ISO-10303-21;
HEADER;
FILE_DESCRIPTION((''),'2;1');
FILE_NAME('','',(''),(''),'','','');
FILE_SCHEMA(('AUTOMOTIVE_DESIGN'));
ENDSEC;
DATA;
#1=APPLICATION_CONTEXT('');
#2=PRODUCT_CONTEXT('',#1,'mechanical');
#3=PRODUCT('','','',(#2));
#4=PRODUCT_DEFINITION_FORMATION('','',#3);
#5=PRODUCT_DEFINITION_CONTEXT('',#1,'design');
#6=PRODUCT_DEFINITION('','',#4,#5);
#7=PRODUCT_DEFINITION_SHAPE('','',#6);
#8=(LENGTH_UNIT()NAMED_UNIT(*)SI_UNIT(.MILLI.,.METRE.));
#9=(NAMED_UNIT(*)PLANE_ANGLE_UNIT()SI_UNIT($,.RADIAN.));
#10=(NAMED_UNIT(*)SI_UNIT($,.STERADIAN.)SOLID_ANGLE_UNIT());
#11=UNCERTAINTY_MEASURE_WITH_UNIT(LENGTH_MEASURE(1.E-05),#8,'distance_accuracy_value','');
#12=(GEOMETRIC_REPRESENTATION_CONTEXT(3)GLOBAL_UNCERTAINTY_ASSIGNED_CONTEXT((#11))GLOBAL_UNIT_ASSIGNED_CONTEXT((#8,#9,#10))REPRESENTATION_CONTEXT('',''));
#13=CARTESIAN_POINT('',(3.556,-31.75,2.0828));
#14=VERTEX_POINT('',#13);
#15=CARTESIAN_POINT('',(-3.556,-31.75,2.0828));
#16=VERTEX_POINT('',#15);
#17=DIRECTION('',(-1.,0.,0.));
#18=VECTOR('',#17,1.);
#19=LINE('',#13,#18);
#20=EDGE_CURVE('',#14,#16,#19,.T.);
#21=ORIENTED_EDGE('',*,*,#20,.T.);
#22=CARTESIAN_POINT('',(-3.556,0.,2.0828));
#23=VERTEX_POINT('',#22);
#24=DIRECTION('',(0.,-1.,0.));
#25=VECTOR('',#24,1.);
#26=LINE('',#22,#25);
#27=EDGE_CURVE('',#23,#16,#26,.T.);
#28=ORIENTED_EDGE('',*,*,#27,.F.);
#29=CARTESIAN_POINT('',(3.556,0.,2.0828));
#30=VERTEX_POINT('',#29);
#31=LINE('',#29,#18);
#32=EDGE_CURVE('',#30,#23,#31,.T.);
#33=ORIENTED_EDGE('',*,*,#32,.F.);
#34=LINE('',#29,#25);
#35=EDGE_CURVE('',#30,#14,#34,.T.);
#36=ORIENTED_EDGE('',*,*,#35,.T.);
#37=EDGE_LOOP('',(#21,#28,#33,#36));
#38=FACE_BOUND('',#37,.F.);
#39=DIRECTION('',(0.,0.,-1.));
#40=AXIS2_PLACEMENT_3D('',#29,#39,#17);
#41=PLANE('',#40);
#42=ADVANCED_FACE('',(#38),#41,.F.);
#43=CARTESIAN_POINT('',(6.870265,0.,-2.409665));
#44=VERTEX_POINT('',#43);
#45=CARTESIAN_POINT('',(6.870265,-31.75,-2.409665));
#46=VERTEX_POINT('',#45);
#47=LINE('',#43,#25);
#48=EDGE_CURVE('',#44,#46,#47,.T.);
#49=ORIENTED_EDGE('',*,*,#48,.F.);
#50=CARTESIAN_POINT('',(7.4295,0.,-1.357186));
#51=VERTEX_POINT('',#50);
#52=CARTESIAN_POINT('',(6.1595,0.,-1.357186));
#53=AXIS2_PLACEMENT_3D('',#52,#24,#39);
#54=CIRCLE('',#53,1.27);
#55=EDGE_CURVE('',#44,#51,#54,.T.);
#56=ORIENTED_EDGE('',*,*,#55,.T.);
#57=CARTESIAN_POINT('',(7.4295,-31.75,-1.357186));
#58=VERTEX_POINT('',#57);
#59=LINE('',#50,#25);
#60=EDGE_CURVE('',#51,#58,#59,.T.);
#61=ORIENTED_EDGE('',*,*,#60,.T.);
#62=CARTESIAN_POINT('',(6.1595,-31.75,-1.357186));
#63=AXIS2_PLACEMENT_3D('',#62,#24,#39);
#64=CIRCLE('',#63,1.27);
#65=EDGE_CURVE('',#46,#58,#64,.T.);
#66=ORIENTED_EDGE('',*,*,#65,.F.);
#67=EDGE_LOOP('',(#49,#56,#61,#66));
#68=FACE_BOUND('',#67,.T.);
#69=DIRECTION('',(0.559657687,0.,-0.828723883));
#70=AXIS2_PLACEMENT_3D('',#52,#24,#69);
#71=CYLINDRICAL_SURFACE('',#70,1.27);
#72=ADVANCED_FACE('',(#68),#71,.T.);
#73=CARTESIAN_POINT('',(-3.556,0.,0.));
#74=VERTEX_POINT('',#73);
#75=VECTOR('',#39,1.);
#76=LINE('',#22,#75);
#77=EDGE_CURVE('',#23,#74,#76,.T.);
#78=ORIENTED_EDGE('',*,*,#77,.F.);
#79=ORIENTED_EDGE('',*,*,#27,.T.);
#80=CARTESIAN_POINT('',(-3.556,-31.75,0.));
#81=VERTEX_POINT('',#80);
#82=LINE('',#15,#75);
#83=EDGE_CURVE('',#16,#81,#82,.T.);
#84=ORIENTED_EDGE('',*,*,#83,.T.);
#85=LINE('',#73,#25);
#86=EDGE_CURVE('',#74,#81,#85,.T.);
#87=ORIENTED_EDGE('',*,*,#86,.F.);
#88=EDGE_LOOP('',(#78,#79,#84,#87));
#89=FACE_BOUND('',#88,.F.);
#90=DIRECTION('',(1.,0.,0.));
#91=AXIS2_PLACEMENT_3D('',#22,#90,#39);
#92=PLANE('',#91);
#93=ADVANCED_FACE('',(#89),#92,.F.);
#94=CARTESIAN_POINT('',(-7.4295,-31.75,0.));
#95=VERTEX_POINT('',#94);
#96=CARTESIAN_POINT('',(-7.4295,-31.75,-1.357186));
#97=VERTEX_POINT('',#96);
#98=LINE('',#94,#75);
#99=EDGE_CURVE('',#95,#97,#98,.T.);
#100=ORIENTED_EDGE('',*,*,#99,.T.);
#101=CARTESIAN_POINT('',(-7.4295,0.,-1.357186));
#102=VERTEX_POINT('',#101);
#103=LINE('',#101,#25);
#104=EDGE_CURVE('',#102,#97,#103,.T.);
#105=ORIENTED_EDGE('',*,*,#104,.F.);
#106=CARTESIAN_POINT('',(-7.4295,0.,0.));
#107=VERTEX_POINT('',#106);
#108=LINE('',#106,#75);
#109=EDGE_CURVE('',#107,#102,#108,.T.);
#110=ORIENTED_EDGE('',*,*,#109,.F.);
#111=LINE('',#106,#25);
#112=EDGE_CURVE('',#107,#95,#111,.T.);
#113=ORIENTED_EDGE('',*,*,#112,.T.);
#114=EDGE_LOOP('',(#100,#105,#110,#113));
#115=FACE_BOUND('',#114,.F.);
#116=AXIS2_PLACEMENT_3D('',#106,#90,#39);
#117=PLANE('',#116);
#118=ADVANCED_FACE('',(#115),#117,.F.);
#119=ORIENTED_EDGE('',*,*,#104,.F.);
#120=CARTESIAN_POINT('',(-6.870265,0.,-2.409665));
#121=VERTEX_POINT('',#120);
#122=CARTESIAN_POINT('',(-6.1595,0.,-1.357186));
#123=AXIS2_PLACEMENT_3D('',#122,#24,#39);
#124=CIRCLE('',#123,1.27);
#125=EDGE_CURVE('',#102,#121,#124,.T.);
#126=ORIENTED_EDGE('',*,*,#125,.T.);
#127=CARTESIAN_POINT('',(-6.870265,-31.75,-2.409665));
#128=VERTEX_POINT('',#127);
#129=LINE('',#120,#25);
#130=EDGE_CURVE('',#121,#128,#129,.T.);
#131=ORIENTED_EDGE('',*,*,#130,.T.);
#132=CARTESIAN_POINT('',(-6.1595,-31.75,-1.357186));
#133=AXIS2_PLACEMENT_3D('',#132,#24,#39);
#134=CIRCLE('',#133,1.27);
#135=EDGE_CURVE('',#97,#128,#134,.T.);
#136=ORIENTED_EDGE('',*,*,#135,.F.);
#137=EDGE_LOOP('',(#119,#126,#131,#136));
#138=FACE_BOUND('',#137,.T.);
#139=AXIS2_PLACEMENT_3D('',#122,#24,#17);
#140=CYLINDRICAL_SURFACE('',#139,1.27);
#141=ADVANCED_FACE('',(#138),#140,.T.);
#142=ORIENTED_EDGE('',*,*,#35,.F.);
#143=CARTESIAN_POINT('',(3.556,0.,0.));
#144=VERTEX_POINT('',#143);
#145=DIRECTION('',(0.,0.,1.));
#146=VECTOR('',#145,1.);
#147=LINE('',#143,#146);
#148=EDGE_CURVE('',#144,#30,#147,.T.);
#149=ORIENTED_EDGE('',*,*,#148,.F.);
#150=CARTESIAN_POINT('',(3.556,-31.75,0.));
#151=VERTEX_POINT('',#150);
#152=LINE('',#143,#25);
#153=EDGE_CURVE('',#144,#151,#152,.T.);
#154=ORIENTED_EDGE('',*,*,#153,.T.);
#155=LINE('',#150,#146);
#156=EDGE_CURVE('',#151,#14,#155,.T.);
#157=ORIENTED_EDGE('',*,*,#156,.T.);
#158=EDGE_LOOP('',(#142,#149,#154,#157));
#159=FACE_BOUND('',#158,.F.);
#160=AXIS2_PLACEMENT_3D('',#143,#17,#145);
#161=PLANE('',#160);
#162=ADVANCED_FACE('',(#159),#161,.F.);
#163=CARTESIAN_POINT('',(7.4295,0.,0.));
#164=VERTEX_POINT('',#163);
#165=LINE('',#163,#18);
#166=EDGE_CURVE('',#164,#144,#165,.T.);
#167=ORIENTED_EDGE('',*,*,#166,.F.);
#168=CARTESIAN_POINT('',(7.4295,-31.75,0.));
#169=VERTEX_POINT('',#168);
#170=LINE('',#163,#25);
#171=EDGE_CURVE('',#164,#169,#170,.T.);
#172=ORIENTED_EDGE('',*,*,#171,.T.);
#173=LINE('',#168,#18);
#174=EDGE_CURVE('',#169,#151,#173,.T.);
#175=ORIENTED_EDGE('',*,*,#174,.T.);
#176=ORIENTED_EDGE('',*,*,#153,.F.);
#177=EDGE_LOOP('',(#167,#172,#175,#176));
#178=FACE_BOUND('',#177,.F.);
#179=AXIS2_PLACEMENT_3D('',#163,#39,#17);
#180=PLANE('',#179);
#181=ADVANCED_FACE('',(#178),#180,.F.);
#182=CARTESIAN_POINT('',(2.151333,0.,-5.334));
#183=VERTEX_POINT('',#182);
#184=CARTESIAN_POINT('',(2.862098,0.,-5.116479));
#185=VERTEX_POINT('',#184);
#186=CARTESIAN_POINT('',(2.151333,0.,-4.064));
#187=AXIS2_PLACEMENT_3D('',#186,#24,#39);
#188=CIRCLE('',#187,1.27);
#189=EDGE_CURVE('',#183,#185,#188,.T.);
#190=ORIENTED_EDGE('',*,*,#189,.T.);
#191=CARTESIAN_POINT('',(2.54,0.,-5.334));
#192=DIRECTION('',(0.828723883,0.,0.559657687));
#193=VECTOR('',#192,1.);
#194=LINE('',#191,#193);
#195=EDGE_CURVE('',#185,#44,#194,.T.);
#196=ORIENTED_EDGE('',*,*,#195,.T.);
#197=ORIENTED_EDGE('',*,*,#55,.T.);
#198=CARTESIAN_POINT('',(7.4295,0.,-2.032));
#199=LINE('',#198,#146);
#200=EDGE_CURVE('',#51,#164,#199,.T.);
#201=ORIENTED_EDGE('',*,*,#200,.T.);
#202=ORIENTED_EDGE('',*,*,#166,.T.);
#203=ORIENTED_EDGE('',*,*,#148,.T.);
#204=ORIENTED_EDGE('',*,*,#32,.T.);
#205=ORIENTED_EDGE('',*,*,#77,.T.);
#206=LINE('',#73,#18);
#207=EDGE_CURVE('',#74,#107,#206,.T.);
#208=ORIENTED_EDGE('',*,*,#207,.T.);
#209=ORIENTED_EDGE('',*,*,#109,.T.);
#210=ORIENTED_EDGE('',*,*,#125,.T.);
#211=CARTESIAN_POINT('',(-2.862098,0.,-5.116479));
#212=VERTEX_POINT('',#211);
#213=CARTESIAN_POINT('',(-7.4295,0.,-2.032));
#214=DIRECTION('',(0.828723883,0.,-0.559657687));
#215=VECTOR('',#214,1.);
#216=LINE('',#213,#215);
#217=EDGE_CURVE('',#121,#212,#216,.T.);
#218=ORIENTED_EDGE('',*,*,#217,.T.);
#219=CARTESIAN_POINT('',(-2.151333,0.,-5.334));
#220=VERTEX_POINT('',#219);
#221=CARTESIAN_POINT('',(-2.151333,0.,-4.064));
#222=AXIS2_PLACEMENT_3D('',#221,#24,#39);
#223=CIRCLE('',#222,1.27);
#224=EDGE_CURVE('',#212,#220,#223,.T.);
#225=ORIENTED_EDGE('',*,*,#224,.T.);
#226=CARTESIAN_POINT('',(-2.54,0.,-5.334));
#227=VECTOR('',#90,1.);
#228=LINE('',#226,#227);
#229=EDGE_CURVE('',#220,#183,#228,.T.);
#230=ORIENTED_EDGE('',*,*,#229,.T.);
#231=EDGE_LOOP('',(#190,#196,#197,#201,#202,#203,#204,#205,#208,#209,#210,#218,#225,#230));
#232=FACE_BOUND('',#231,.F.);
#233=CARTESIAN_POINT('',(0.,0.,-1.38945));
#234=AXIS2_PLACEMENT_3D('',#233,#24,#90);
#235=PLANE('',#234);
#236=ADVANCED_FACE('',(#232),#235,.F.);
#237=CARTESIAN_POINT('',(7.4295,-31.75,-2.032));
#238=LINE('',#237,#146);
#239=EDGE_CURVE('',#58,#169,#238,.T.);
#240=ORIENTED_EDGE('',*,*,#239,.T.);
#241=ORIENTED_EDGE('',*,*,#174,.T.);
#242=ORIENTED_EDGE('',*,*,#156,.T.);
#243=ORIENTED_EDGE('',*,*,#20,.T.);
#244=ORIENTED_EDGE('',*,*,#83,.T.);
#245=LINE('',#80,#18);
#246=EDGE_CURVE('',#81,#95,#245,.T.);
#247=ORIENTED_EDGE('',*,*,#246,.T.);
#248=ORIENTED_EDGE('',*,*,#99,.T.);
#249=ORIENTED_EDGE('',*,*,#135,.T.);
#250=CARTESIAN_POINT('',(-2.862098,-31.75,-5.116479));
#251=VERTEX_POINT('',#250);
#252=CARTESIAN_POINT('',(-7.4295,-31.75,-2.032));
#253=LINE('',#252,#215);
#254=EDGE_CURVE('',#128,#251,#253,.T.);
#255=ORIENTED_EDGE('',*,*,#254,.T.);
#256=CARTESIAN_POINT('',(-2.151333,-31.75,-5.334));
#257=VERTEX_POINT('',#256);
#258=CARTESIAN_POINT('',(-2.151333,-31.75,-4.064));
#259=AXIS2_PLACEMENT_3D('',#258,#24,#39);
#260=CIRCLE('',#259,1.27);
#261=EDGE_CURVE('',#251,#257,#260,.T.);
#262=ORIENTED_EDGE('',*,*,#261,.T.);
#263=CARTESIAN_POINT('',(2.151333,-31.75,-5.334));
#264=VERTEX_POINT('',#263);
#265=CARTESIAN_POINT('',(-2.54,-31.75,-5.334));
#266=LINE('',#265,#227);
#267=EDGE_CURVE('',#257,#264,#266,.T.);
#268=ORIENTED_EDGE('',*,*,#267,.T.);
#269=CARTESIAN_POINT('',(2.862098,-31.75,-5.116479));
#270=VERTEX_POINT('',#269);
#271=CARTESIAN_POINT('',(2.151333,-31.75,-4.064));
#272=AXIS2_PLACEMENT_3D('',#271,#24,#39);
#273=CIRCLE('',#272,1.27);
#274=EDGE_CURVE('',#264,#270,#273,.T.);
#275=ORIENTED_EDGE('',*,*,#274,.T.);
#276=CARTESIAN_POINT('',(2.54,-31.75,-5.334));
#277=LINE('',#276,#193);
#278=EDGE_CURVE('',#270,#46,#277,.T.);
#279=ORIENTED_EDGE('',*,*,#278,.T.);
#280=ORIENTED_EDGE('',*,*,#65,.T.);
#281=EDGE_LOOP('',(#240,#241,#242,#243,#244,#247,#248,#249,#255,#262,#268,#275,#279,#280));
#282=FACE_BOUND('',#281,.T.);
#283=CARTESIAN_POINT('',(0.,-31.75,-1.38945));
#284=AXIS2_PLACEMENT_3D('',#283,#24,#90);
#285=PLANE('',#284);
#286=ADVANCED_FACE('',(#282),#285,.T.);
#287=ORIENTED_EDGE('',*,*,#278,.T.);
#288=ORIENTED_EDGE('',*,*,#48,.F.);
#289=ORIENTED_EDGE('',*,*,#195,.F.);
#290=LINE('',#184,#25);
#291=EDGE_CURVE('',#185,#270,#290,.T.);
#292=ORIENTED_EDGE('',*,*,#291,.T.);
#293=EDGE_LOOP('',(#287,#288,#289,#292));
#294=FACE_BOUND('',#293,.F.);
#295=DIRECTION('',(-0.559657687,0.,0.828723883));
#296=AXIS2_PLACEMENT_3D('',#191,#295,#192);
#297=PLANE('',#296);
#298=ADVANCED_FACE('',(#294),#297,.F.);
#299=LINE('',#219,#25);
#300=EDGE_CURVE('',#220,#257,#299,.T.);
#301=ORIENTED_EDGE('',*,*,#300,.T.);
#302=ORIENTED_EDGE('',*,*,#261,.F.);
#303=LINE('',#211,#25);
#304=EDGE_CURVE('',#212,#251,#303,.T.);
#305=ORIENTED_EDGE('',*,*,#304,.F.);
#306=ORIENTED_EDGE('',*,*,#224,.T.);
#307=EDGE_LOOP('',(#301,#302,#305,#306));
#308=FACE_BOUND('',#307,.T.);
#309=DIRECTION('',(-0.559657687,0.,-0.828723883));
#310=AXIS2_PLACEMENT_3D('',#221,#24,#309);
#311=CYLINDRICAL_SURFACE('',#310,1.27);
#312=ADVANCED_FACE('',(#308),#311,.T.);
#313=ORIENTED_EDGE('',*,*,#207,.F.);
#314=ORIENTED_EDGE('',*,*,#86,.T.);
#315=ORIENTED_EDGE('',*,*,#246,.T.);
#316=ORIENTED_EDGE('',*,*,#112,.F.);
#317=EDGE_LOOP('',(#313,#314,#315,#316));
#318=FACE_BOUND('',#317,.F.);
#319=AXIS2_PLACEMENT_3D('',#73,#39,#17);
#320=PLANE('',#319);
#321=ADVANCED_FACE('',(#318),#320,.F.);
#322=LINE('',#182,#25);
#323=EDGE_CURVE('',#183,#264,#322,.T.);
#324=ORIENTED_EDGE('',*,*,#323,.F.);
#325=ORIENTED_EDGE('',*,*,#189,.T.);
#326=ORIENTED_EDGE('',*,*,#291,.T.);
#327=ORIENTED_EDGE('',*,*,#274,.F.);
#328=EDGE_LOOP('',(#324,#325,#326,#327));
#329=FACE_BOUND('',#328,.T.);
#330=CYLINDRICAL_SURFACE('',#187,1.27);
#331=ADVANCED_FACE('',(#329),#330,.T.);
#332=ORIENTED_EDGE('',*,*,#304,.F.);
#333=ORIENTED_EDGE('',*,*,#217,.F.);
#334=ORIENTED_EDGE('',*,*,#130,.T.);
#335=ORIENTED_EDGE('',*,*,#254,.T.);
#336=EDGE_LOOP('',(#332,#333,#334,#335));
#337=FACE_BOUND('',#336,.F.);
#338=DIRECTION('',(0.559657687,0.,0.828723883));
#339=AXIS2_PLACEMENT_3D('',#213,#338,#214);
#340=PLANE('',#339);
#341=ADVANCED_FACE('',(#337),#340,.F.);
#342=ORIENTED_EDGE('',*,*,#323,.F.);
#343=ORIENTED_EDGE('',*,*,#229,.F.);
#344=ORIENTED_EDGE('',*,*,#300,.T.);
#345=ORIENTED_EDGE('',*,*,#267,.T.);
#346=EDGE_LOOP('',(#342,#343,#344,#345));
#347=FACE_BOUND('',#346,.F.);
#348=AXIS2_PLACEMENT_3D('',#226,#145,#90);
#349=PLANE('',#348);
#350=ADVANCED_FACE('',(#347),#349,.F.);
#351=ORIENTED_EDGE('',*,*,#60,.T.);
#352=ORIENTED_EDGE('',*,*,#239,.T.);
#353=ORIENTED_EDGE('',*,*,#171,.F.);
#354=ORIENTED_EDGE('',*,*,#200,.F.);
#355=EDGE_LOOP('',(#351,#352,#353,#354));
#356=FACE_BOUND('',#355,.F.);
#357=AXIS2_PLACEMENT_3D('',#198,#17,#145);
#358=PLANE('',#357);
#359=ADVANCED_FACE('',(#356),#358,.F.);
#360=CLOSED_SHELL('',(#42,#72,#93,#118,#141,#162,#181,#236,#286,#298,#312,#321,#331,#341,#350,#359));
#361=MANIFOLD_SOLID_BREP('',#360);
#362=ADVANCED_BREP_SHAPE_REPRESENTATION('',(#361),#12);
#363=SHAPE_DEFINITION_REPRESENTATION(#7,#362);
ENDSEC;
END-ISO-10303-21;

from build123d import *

# Parameters (mm, degrees)
F1_DEPTH = 31.75
F3_R     = 1.27


# Not quite as in the source:
# - a feature names something its author has since deleted; it is built from what else it names


with BuildPart() as f1:
    # F0 (on Front) → F1 (new body)
    with BuildSketch(Plane.XZ):
        Polygon((3.556, 2.0828), (-3.556, 2.0828), (-3.556, 0), (-7.4295, 0), (-7.4295, -2.032), (-2.54, -5.334), (2.54, -5.334), (7.4295, -2.032), (7.4295, 0), (3.556, 0), align=None)
    extrude(amount=F1_DEPTH)

    # F3
    f3_edges = [f1.edges().sort_by_distance(p)[0] for p in [
        (7.4295, -15.875, -2.032),
        (2.54, -15.875, -5.334),
        (-2.54, -15.875, -5.334),
        (-7.4295, -15.875, -2.032),
    ]]
    fillet(f3_edges, radius=F3_R)


solid = f1.part
